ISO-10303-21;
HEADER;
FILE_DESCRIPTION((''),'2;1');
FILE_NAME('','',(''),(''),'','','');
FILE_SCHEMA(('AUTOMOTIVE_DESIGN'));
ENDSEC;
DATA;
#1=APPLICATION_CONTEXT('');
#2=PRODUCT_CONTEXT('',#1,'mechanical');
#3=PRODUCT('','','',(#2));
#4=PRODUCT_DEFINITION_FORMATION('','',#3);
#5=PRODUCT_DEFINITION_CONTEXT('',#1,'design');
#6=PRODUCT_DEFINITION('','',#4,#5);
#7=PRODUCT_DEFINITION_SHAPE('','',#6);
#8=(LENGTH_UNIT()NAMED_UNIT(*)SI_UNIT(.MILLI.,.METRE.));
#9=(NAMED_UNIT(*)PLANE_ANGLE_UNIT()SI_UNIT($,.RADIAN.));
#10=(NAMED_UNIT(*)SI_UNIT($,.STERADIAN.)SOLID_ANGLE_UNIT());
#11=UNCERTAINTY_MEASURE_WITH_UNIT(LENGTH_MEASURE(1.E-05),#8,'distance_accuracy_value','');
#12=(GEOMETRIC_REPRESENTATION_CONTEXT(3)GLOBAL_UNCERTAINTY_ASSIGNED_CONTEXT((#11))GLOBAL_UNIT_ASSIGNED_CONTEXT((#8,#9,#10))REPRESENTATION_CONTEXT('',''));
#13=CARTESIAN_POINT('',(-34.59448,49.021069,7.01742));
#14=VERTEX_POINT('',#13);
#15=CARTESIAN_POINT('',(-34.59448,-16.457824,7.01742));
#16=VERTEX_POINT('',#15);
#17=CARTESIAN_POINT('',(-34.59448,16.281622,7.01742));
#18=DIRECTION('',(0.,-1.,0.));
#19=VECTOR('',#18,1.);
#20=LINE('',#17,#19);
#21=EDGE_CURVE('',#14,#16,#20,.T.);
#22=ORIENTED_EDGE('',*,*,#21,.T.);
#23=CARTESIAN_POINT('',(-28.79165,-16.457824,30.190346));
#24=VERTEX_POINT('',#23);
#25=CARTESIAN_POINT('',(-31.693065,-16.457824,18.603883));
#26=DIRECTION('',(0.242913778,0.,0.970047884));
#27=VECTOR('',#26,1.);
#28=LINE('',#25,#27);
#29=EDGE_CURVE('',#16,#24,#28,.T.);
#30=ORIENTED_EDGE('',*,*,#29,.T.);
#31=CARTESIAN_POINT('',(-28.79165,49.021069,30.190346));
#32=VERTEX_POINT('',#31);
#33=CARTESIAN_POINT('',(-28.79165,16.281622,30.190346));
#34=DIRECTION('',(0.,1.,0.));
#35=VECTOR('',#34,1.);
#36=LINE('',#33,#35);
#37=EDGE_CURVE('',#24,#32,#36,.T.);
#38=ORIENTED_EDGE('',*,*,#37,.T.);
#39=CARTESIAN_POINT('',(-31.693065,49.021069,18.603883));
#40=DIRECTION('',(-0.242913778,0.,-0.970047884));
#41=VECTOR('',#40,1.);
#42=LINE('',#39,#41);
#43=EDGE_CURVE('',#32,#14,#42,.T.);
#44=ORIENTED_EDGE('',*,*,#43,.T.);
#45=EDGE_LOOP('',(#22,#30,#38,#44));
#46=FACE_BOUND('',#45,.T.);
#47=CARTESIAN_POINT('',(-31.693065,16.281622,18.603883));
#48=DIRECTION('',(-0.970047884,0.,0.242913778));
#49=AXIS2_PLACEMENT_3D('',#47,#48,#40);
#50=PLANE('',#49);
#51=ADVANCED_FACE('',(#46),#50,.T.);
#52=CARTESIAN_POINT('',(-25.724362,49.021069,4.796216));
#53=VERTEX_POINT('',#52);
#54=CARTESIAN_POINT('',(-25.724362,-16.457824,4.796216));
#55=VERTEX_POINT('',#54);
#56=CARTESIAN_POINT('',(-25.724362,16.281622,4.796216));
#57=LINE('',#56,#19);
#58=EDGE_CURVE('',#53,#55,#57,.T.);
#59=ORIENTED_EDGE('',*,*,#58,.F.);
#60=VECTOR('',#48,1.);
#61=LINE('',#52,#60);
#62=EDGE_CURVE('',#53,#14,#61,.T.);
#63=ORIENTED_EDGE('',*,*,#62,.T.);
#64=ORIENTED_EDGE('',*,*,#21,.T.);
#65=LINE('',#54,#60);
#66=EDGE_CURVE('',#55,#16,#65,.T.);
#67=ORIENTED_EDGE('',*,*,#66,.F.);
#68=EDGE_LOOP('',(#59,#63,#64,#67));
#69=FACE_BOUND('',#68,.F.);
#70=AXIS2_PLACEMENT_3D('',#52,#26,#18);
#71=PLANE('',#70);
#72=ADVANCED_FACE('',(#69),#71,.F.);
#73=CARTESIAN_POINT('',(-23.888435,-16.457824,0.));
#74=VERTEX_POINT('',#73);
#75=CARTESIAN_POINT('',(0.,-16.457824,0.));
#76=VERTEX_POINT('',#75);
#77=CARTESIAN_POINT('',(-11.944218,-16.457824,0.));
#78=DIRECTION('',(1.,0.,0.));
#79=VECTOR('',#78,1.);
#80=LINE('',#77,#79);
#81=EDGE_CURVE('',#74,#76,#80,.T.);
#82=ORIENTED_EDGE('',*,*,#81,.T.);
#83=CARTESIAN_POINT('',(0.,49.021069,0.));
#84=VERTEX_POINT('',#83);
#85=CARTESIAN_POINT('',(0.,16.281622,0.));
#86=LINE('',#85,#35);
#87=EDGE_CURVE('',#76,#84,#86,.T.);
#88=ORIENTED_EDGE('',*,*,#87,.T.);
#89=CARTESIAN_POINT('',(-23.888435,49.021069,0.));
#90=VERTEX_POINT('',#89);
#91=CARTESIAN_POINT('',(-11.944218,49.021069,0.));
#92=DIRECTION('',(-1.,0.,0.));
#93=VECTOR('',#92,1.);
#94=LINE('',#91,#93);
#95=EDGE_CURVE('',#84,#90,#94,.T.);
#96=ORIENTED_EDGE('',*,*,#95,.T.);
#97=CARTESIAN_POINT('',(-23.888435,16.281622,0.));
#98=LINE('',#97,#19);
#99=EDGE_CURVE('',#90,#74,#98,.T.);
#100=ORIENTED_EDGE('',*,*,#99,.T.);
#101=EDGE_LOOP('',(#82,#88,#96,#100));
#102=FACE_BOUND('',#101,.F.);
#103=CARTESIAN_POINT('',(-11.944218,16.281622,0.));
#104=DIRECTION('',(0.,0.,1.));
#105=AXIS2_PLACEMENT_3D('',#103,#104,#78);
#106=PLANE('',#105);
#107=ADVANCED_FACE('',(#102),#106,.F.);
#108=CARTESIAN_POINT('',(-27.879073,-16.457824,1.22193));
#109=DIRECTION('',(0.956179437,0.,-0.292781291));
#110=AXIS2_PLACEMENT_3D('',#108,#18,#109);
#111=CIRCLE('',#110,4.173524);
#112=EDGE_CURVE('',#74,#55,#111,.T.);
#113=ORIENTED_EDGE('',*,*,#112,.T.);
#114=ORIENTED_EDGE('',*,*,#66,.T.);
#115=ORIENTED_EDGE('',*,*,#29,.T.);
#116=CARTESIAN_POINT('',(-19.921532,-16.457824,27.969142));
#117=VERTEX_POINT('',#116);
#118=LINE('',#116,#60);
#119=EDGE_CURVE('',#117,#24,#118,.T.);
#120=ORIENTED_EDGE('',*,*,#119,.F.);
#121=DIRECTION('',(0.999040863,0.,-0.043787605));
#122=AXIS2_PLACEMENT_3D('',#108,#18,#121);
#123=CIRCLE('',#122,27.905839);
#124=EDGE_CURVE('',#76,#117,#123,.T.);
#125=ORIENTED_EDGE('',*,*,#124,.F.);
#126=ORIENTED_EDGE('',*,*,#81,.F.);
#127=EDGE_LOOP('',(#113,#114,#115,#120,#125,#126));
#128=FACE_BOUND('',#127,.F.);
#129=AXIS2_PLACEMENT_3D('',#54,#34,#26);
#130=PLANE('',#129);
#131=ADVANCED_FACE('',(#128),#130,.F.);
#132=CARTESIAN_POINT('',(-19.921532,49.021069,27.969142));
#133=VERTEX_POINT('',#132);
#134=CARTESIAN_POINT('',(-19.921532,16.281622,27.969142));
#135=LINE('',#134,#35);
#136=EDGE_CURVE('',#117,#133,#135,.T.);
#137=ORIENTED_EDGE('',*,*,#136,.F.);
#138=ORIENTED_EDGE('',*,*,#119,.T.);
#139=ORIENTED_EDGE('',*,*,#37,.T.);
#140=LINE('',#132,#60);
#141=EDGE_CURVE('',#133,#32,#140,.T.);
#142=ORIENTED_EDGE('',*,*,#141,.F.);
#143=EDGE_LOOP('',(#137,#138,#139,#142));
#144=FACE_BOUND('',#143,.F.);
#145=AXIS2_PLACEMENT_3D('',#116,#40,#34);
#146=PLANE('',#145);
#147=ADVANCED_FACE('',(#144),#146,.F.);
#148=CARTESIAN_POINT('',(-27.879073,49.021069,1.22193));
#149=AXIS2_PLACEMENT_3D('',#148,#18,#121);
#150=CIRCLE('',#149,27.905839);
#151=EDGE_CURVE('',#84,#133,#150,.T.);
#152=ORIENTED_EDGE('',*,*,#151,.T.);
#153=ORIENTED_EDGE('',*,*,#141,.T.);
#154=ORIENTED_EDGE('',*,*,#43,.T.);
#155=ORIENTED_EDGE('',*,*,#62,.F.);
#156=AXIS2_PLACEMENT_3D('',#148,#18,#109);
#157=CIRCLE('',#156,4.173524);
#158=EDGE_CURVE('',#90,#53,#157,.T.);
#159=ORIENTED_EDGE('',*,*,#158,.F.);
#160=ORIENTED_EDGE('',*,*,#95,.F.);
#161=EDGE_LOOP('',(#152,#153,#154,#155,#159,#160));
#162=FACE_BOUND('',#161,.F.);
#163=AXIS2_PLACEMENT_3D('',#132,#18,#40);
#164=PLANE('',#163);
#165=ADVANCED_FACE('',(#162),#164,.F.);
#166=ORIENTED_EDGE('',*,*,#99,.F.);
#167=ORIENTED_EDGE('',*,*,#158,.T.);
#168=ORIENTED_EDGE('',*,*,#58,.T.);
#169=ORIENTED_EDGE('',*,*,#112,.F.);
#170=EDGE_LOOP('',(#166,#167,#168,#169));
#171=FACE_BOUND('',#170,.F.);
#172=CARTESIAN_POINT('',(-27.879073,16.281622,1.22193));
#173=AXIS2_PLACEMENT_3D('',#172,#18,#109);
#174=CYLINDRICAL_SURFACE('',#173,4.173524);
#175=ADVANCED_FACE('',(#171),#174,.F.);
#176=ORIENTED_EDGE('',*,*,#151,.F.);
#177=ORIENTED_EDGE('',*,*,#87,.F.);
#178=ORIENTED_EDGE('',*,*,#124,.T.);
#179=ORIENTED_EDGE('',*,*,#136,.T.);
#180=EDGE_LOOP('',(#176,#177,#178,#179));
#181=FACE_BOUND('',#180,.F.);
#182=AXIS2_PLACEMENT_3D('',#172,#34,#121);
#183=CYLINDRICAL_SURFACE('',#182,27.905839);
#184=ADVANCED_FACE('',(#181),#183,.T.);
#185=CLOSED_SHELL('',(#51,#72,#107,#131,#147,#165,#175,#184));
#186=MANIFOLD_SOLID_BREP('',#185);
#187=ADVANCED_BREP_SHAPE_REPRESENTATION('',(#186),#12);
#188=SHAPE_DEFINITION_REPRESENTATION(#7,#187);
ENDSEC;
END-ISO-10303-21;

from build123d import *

# Parameters (mm, degrees)
F1_W     = 23.8884352148
F1_H     = 65.4788929969
F3_DEPTH = 9.144


with BuildPart() as f2:
    # F2: sweep along a path in F0
    with BuildLine(Plane.XZ) as f2_path:
        ThreePointArc((0, 0), (-5.1494897323, 17.4114904643), (-19.9215319008, 27.9691424221))
    # F1 (on Top) → F2 (sweep)
    with BuildSketch(Plane.XY):
        with Locations((-11.9442176074, 16.281622462)):
            Rectangle(F1_W, F1_H)
    sweep(path=f2_path.line)

    # F3 (add): a face of the model
    f3_faces = [f2.faces().sort_by_distance(p)[0] for p in [
        (-22.82294692, 16.281622462, 16.3826794096),
    ]]
    extrude(f3_faces, amount=F3_DEPTH)


solid = f2.part
